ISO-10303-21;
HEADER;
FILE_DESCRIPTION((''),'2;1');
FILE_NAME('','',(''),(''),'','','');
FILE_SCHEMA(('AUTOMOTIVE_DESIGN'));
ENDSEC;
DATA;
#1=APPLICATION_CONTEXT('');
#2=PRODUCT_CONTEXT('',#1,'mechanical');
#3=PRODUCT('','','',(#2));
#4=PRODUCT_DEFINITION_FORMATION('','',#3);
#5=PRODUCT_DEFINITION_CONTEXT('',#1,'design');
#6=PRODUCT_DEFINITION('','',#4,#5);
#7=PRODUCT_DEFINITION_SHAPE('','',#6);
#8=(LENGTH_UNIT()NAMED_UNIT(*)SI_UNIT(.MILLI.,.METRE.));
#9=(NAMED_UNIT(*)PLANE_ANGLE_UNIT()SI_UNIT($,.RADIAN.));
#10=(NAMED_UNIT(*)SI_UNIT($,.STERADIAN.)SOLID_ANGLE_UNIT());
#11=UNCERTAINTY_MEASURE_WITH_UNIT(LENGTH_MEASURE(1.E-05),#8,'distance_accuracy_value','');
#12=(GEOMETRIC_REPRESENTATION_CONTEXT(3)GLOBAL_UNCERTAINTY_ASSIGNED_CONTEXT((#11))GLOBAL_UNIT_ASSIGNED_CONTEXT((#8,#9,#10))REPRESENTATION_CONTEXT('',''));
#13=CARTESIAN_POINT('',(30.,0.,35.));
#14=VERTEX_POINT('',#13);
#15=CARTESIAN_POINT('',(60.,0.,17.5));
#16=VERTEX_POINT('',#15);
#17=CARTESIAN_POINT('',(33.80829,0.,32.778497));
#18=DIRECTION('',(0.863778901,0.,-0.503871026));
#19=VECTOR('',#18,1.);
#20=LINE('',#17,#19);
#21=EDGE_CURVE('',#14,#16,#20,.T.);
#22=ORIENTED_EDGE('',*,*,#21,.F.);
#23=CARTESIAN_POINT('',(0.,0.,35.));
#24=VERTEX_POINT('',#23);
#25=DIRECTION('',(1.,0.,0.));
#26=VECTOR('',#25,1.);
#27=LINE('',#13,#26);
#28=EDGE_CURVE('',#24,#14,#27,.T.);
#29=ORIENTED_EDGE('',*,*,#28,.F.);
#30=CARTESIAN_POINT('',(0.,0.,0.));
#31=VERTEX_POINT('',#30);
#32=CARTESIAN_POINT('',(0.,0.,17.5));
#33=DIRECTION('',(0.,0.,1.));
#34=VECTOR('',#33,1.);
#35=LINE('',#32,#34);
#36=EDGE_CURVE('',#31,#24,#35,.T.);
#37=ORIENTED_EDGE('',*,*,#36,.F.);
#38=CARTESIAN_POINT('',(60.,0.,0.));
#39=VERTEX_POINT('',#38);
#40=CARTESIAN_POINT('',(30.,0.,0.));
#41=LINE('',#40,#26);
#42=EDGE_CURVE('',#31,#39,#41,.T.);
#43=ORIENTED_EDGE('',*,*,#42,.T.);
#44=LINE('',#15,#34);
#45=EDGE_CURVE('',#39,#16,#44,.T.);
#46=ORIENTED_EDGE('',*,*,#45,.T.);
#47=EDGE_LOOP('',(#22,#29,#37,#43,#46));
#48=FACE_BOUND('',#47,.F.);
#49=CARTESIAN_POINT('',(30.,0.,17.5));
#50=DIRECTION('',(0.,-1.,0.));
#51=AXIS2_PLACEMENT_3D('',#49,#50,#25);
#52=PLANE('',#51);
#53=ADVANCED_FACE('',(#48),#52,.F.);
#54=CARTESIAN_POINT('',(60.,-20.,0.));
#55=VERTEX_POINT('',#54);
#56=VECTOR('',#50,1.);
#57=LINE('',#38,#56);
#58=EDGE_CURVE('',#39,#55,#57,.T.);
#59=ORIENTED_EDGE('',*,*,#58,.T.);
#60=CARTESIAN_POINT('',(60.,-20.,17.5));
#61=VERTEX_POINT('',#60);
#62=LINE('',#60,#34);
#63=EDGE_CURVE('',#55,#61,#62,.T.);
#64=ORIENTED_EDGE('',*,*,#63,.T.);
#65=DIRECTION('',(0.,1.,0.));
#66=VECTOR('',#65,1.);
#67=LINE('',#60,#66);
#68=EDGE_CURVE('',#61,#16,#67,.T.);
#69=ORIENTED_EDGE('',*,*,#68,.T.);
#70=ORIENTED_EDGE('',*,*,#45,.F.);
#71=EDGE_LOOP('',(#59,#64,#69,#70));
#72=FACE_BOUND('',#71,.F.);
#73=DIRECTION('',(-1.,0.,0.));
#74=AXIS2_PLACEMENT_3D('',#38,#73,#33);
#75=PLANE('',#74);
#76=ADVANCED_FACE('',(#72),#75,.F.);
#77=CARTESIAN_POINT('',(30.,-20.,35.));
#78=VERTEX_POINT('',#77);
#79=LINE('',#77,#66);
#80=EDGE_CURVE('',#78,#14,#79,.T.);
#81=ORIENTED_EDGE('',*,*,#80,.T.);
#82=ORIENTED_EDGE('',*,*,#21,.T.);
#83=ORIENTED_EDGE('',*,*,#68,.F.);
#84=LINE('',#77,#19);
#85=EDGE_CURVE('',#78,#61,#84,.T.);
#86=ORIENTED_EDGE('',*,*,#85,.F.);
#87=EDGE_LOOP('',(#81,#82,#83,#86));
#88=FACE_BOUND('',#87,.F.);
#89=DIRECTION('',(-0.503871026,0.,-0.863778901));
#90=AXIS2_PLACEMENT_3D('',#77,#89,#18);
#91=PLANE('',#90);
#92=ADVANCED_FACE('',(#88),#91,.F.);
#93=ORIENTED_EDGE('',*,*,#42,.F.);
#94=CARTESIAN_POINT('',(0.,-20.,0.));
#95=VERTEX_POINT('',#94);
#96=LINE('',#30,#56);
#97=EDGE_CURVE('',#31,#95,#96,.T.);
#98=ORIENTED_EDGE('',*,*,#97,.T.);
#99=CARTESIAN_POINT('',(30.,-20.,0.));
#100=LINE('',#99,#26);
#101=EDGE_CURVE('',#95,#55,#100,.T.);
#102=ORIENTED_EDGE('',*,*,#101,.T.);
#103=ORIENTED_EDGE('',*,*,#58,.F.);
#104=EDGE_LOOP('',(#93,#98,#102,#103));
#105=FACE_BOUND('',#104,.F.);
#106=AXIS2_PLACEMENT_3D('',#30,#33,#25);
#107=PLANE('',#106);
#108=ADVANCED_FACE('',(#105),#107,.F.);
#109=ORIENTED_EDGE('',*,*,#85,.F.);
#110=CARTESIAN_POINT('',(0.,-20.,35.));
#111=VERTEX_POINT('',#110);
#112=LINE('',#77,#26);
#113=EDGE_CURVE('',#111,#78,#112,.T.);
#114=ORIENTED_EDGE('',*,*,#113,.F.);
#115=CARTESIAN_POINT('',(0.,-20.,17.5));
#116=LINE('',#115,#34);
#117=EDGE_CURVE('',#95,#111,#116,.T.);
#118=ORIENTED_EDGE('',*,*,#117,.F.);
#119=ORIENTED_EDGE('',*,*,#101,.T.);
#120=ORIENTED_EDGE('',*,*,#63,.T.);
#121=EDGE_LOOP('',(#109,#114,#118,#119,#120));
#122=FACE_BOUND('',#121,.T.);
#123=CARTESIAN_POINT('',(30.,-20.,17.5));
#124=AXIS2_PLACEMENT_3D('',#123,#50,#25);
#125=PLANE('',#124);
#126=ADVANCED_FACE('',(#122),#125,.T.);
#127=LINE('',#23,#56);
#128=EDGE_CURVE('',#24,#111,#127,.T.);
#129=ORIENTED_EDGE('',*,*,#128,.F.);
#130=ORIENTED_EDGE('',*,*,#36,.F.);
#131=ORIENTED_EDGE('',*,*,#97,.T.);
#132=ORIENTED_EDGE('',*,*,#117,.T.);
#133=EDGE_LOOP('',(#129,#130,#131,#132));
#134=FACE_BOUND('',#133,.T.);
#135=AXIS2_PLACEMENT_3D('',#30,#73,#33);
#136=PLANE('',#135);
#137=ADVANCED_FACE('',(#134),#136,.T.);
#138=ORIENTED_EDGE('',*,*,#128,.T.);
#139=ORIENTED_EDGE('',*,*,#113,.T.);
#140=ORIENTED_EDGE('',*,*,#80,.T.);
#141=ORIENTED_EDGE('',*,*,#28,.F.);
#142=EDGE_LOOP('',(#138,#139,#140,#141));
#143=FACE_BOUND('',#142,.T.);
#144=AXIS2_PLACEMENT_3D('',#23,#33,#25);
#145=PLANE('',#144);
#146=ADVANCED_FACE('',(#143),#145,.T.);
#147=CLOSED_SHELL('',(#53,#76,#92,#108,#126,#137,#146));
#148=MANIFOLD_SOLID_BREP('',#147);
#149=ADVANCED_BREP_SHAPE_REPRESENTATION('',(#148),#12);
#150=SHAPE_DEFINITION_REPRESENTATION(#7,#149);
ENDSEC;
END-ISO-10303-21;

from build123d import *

# Parameters (mm, degrees)
F0_W     = 60
F0_H     = 35
F1_DEPTH = 20
F3_DEPTH = 25


# Not quite as in the source:
# - a feature names something its author has since deleted; it is built from what else it names


with BuildPart() as f1:
    # F0 (on Front) → F1 (new body)
    with BuildSketch(Plane.XZ):
        with Locations((30, 17.5)):
            Rectangle(F0_W, F0_H)
    extrude(amount=F1_DEPTH)

    # F2 (on face) → F3 (cut)
    with BuildSketch(Plane.XZ.offset(20)):
        Polygon((60, 35), (30, 35), (60, 17.5), align=None)
    extrude(amount=-F3_DEPTH, mode=Mode.SUBTRACT)


solid = f1.part
